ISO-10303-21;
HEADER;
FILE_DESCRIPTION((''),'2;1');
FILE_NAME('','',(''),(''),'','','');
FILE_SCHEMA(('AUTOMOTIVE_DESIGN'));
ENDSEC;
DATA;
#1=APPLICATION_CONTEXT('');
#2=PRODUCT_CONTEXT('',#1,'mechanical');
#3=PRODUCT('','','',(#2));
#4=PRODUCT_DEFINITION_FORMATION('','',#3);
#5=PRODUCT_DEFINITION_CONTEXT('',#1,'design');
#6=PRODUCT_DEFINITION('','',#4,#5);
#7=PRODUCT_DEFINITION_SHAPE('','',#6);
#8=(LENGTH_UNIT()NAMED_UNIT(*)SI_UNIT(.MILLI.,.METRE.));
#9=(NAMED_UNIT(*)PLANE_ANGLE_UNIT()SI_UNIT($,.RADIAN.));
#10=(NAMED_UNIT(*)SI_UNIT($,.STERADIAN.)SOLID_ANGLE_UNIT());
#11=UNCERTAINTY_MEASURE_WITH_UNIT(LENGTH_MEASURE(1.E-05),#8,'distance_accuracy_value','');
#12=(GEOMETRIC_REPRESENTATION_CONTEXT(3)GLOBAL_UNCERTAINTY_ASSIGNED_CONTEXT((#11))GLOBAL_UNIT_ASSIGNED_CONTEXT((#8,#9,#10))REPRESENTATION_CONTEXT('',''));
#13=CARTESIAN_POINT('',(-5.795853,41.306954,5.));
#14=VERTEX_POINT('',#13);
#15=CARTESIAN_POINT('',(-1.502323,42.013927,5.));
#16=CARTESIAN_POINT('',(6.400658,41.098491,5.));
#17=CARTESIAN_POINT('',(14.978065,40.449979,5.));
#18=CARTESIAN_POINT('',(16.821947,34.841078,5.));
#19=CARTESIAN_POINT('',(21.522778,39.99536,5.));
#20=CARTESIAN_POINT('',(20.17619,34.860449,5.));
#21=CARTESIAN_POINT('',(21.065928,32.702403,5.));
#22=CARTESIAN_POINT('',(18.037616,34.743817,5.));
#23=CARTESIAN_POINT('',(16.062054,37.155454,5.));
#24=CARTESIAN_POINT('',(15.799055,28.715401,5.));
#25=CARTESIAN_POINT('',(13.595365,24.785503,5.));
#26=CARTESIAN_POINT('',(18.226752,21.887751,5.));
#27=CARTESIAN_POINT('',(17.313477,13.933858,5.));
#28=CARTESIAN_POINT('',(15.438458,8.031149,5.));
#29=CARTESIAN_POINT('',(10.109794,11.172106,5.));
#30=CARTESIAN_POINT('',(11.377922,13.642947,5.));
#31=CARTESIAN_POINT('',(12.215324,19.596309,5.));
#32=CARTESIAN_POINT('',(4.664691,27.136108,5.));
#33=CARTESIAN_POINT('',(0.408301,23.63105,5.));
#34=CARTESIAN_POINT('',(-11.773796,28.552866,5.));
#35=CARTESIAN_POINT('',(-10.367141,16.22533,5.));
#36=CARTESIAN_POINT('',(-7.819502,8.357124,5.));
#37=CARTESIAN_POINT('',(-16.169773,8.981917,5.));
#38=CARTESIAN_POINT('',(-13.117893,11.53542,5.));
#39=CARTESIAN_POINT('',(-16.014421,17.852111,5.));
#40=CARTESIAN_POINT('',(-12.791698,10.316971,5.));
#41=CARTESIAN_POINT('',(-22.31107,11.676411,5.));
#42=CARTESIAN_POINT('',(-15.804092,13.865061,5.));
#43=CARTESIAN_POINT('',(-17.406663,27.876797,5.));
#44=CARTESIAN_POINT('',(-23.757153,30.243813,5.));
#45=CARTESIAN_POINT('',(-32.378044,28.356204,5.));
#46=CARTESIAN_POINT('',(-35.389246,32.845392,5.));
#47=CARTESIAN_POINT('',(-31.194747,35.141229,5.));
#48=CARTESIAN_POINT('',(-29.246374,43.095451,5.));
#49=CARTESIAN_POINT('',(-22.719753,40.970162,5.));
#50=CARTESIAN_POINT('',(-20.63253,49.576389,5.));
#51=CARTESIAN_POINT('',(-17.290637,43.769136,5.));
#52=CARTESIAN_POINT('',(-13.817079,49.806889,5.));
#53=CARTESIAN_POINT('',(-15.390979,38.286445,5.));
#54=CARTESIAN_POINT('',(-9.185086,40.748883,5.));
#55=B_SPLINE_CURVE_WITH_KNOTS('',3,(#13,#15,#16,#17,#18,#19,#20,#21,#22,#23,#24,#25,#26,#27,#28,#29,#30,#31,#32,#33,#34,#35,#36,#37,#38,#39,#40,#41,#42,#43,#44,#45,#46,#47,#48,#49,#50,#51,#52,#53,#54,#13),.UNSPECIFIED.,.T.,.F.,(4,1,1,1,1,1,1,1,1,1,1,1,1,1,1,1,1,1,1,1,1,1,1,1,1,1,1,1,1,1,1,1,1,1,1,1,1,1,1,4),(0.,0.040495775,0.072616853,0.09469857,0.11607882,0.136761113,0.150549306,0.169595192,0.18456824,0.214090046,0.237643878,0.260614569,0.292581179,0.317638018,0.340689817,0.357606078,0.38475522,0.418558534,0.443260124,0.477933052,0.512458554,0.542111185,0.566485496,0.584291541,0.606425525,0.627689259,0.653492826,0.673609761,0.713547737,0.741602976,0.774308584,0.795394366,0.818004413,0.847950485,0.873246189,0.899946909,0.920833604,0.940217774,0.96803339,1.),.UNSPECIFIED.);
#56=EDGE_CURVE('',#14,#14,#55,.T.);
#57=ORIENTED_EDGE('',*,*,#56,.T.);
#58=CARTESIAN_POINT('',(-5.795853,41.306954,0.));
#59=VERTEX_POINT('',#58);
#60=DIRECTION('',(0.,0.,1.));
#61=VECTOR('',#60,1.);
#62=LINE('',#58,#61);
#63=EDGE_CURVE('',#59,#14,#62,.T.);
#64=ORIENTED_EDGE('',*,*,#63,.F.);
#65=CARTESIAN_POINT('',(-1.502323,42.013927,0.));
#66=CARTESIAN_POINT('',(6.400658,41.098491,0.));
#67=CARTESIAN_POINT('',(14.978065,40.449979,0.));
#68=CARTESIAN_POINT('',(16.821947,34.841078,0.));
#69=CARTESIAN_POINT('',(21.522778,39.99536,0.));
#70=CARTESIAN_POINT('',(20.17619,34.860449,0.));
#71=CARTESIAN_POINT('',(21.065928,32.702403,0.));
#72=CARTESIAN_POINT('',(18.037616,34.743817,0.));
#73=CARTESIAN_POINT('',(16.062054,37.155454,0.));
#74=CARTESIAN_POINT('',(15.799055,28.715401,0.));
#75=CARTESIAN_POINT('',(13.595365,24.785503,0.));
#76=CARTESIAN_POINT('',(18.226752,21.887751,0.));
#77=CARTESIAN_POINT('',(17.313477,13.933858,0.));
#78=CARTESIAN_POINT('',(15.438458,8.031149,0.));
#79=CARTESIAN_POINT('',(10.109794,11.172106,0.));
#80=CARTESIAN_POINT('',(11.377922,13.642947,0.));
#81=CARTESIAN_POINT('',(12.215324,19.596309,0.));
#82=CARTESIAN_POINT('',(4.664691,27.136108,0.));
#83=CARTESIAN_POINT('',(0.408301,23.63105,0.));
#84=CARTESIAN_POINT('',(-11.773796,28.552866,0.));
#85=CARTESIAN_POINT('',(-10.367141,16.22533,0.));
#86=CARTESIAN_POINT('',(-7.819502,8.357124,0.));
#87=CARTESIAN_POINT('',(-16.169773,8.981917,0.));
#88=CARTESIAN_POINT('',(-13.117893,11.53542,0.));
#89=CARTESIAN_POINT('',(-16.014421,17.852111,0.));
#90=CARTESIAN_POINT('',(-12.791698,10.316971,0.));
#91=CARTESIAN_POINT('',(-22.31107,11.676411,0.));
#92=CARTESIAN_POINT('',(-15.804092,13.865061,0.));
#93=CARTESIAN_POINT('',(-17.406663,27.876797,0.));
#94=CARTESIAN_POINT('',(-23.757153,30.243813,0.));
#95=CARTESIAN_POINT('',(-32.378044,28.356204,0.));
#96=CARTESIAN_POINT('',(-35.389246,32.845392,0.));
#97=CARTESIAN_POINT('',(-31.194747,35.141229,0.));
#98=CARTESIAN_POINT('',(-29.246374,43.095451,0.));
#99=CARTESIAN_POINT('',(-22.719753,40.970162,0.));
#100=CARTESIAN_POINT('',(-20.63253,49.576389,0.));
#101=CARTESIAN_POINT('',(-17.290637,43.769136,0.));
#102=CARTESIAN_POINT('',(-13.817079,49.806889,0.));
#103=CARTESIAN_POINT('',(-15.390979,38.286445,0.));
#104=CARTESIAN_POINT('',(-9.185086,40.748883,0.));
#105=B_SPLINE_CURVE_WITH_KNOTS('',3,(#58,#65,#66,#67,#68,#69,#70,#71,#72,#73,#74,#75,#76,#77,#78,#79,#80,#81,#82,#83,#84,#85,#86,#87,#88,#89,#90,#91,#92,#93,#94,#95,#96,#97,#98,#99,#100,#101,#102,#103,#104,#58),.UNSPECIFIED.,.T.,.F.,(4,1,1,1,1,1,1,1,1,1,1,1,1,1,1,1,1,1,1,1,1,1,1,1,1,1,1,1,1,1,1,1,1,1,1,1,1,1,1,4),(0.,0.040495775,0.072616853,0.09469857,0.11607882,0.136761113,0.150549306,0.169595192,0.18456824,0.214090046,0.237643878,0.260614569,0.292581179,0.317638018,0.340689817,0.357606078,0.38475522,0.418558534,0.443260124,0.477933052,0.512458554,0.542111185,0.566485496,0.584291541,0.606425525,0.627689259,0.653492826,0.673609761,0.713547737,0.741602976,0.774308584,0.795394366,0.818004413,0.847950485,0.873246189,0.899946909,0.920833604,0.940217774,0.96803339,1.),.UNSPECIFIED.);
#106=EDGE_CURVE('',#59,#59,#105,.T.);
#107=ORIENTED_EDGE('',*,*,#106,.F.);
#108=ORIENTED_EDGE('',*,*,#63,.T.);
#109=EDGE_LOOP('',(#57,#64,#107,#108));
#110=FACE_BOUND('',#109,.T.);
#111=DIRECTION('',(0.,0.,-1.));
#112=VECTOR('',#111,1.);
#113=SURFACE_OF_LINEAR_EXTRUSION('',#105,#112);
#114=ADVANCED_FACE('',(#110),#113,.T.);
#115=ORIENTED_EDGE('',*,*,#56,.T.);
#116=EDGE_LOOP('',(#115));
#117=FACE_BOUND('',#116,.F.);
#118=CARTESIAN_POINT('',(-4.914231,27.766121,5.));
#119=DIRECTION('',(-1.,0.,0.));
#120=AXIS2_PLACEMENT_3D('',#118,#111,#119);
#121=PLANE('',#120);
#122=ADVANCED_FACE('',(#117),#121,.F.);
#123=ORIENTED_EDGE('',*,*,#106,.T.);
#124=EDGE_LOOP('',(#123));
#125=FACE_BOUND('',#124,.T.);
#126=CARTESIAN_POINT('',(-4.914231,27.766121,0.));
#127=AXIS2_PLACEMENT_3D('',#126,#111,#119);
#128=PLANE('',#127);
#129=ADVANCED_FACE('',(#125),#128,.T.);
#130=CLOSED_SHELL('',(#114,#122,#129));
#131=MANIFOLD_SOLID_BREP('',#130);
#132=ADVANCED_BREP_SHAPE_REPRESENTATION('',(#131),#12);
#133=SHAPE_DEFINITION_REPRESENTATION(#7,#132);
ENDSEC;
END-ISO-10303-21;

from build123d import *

# Parameters (mm, degrees)
F1_DEPTH = 5


with BuildPart() as f1:
    # F0 (on Top) → F1 (new body)
    with BuildSketch(Plane.XY):
        with BuildLine():
            add(Edge.make_bspline(
                [(-5.7958532125, 41.3069538772), (-1.5023227633, 42.0139265126), (6.4006578907, 41.098491499), (14.9780649484, 40.4499787429), (16.8219474993, 34.8410780305), (21.5227775113, 39.9953598091), (20.1761898121, 34.8604489974), (21.0659279109, 32.702403225), (18.037615758, 34.7438168336), (16.0620539512, 37.1554536358), (15.7990552936, 28.715400599), (13.5953648934, 24.7855032348), (18.2267515341, 21.8877508635), (17.313477333, 13.933857727), (15.4384578213, 8.0311485273), (10.1097938715, 11.1721056819), (11.3779216042, 13.6429470739), (12.2153238793, 19.5963089054), (4.664691376, 27.1361075182), (0.4083011663, 23.6310499935), (-11.7737961921, 28.552865839), (-10.367141144, 16.2253304178), (-7.8195021007, 8.3571237164), (-16.1697731875, 8.9819165124), (-13.1178925431, 11.5354202761), (-16.0144214452, 17.8521108141), (-12.7916984028, 10.3169710238), (-22.3110698072, 11.6764112707), (-15.8040915169, 13.8650612273), (-17.4066633323, 27.8767973034), (-23.7571527111, 30.2438134545), (-32.3780435833, 28.3562042138), (-35.3892455885, 32.8453920526), (-31.1947474588, 35.1412286843), (-29.2463738371, 43.0954505553), (-22.7197529249, 40.9701623777), (-20.6325297336, 49.5763885284), (-17.2906373589, 43.7691361124), (-13.8170789563, 49.8068886834), (-15.3909785175, 38.2864446157), (-9.1850861114, 40.7488828578), (-5.7958532125, 41.3069538772)],
                knots=[0, 0, 0, 0, 0.0404957746, 0.0726168535, 0.0946985699, 0.11607882, 0.1367611125, 0.1505493056, 0.1695951919, 0.1845682399, 0.2140900457, 0.2376438777, 0.260614569, 0.2925811786, 0.3176380176, 0.3406898175, 0.3576060778, 0.3847552199, 0.4185585339, 0.4432601236, 0.477933052, 0.5124585538, 0.5421111852, 0.566485496, 0.5842915413, 0.6064255251, 0.6276892591, 0.6534928256, 0.6736097607, 0.7135477368, 0.741602976, 0.7743085845, 0.7953943665, 0.818004413, 0.8479504847, 0.873246189, 0.8999469087, 0.9208336041, 0.9402177736, 0.9680333904, 1, 1, 1, 1], degree=3))
        make_face()
    extrude(amount=F1_DEPTH)


solid = f1.part
